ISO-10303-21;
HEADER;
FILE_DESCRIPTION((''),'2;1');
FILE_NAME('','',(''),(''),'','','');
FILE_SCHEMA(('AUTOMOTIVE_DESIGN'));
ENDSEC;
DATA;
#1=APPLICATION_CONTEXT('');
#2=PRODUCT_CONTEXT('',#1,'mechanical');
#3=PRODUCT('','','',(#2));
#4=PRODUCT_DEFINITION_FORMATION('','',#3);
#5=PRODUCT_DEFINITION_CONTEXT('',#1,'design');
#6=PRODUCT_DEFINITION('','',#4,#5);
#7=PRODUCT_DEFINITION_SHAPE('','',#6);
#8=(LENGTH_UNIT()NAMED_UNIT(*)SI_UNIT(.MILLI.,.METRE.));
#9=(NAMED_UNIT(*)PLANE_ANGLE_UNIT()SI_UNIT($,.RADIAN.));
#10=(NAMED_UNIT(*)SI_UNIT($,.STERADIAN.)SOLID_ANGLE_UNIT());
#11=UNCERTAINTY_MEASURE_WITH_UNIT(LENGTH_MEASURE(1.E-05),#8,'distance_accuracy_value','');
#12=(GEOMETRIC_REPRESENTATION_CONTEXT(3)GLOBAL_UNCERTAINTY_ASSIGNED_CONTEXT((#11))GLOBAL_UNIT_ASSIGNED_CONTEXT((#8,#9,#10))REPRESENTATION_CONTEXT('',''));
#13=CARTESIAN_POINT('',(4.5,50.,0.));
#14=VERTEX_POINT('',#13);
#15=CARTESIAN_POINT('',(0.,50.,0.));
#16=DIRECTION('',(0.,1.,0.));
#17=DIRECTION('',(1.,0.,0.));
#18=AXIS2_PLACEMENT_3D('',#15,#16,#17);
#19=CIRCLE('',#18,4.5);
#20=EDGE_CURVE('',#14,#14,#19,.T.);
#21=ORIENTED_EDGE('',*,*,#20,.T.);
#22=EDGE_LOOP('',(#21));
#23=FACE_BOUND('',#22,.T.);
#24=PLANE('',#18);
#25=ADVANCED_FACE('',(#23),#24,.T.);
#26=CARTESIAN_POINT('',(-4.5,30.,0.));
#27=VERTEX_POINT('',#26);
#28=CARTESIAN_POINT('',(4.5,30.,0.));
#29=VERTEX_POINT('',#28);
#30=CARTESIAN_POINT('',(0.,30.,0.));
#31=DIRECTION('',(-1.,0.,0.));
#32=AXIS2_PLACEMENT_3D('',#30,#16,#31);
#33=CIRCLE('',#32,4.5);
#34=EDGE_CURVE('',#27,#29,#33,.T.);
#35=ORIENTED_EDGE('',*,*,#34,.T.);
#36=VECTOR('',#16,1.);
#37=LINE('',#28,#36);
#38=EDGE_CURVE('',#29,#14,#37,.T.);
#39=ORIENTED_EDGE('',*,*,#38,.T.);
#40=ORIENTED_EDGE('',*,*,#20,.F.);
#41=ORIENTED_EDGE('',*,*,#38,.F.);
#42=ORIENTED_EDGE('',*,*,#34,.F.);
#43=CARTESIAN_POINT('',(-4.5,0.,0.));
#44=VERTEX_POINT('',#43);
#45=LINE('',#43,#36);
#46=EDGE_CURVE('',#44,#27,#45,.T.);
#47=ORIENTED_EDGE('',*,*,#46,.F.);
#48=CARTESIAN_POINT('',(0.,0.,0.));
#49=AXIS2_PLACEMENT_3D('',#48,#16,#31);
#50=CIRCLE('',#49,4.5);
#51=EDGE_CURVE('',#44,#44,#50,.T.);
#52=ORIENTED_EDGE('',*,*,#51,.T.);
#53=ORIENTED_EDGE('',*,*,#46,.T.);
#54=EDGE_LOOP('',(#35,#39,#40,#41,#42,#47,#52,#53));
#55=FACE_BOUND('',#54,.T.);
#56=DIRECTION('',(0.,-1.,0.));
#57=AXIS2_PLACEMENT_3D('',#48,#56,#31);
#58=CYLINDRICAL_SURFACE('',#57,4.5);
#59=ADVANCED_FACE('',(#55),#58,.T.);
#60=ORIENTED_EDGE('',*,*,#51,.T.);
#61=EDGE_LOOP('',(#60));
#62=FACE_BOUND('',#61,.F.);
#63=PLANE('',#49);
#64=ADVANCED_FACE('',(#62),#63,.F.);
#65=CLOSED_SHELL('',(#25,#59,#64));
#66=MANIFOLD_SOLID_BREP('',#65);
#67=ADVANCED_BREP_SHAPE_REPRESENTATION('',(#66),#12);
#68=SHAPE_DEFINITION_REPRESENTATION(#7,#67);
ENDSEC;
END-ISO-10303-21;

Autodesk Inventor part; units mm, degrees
ref_plane "YZ Plane" through (0, 0, 0) normal (1, 0, 0) x (0, 1, 0)
ref_plane "XZ Plane" through (0, 0, 0) normal (0, 1, 0) x (-1, 0, 0)
ref_plane "XY Plane" through (0, 0, 0) normal (0, 0, 1) x (1, 0, 0)
sketch "Sketch1" plane through (0, 0, 0) normal (0, 1, 0) x (-1, 0, 0)
  circle A0 centre (0, 0) radius 4.5
  dimension "d0" = 9
extrude "Extrusion1" add sketch "Sketch1" along normal blind 30
sketch "Sketch3" plane through (0, 30, 0) normal (0, 1, 0) x (1, 0, 0)
  circle A0 centre (0, 0) radius 4.5 projected
  circle A1 centre (0, 0) radius 4.4
extrude "Extrusion2" add sketch "Sketch3" along normal blind 20 contours A0 | A1
thread "Thread2" size "M9x1.25" class "6g" standard "ANSI Metric M Profile" length 30
properties part number "_3DPrint"
